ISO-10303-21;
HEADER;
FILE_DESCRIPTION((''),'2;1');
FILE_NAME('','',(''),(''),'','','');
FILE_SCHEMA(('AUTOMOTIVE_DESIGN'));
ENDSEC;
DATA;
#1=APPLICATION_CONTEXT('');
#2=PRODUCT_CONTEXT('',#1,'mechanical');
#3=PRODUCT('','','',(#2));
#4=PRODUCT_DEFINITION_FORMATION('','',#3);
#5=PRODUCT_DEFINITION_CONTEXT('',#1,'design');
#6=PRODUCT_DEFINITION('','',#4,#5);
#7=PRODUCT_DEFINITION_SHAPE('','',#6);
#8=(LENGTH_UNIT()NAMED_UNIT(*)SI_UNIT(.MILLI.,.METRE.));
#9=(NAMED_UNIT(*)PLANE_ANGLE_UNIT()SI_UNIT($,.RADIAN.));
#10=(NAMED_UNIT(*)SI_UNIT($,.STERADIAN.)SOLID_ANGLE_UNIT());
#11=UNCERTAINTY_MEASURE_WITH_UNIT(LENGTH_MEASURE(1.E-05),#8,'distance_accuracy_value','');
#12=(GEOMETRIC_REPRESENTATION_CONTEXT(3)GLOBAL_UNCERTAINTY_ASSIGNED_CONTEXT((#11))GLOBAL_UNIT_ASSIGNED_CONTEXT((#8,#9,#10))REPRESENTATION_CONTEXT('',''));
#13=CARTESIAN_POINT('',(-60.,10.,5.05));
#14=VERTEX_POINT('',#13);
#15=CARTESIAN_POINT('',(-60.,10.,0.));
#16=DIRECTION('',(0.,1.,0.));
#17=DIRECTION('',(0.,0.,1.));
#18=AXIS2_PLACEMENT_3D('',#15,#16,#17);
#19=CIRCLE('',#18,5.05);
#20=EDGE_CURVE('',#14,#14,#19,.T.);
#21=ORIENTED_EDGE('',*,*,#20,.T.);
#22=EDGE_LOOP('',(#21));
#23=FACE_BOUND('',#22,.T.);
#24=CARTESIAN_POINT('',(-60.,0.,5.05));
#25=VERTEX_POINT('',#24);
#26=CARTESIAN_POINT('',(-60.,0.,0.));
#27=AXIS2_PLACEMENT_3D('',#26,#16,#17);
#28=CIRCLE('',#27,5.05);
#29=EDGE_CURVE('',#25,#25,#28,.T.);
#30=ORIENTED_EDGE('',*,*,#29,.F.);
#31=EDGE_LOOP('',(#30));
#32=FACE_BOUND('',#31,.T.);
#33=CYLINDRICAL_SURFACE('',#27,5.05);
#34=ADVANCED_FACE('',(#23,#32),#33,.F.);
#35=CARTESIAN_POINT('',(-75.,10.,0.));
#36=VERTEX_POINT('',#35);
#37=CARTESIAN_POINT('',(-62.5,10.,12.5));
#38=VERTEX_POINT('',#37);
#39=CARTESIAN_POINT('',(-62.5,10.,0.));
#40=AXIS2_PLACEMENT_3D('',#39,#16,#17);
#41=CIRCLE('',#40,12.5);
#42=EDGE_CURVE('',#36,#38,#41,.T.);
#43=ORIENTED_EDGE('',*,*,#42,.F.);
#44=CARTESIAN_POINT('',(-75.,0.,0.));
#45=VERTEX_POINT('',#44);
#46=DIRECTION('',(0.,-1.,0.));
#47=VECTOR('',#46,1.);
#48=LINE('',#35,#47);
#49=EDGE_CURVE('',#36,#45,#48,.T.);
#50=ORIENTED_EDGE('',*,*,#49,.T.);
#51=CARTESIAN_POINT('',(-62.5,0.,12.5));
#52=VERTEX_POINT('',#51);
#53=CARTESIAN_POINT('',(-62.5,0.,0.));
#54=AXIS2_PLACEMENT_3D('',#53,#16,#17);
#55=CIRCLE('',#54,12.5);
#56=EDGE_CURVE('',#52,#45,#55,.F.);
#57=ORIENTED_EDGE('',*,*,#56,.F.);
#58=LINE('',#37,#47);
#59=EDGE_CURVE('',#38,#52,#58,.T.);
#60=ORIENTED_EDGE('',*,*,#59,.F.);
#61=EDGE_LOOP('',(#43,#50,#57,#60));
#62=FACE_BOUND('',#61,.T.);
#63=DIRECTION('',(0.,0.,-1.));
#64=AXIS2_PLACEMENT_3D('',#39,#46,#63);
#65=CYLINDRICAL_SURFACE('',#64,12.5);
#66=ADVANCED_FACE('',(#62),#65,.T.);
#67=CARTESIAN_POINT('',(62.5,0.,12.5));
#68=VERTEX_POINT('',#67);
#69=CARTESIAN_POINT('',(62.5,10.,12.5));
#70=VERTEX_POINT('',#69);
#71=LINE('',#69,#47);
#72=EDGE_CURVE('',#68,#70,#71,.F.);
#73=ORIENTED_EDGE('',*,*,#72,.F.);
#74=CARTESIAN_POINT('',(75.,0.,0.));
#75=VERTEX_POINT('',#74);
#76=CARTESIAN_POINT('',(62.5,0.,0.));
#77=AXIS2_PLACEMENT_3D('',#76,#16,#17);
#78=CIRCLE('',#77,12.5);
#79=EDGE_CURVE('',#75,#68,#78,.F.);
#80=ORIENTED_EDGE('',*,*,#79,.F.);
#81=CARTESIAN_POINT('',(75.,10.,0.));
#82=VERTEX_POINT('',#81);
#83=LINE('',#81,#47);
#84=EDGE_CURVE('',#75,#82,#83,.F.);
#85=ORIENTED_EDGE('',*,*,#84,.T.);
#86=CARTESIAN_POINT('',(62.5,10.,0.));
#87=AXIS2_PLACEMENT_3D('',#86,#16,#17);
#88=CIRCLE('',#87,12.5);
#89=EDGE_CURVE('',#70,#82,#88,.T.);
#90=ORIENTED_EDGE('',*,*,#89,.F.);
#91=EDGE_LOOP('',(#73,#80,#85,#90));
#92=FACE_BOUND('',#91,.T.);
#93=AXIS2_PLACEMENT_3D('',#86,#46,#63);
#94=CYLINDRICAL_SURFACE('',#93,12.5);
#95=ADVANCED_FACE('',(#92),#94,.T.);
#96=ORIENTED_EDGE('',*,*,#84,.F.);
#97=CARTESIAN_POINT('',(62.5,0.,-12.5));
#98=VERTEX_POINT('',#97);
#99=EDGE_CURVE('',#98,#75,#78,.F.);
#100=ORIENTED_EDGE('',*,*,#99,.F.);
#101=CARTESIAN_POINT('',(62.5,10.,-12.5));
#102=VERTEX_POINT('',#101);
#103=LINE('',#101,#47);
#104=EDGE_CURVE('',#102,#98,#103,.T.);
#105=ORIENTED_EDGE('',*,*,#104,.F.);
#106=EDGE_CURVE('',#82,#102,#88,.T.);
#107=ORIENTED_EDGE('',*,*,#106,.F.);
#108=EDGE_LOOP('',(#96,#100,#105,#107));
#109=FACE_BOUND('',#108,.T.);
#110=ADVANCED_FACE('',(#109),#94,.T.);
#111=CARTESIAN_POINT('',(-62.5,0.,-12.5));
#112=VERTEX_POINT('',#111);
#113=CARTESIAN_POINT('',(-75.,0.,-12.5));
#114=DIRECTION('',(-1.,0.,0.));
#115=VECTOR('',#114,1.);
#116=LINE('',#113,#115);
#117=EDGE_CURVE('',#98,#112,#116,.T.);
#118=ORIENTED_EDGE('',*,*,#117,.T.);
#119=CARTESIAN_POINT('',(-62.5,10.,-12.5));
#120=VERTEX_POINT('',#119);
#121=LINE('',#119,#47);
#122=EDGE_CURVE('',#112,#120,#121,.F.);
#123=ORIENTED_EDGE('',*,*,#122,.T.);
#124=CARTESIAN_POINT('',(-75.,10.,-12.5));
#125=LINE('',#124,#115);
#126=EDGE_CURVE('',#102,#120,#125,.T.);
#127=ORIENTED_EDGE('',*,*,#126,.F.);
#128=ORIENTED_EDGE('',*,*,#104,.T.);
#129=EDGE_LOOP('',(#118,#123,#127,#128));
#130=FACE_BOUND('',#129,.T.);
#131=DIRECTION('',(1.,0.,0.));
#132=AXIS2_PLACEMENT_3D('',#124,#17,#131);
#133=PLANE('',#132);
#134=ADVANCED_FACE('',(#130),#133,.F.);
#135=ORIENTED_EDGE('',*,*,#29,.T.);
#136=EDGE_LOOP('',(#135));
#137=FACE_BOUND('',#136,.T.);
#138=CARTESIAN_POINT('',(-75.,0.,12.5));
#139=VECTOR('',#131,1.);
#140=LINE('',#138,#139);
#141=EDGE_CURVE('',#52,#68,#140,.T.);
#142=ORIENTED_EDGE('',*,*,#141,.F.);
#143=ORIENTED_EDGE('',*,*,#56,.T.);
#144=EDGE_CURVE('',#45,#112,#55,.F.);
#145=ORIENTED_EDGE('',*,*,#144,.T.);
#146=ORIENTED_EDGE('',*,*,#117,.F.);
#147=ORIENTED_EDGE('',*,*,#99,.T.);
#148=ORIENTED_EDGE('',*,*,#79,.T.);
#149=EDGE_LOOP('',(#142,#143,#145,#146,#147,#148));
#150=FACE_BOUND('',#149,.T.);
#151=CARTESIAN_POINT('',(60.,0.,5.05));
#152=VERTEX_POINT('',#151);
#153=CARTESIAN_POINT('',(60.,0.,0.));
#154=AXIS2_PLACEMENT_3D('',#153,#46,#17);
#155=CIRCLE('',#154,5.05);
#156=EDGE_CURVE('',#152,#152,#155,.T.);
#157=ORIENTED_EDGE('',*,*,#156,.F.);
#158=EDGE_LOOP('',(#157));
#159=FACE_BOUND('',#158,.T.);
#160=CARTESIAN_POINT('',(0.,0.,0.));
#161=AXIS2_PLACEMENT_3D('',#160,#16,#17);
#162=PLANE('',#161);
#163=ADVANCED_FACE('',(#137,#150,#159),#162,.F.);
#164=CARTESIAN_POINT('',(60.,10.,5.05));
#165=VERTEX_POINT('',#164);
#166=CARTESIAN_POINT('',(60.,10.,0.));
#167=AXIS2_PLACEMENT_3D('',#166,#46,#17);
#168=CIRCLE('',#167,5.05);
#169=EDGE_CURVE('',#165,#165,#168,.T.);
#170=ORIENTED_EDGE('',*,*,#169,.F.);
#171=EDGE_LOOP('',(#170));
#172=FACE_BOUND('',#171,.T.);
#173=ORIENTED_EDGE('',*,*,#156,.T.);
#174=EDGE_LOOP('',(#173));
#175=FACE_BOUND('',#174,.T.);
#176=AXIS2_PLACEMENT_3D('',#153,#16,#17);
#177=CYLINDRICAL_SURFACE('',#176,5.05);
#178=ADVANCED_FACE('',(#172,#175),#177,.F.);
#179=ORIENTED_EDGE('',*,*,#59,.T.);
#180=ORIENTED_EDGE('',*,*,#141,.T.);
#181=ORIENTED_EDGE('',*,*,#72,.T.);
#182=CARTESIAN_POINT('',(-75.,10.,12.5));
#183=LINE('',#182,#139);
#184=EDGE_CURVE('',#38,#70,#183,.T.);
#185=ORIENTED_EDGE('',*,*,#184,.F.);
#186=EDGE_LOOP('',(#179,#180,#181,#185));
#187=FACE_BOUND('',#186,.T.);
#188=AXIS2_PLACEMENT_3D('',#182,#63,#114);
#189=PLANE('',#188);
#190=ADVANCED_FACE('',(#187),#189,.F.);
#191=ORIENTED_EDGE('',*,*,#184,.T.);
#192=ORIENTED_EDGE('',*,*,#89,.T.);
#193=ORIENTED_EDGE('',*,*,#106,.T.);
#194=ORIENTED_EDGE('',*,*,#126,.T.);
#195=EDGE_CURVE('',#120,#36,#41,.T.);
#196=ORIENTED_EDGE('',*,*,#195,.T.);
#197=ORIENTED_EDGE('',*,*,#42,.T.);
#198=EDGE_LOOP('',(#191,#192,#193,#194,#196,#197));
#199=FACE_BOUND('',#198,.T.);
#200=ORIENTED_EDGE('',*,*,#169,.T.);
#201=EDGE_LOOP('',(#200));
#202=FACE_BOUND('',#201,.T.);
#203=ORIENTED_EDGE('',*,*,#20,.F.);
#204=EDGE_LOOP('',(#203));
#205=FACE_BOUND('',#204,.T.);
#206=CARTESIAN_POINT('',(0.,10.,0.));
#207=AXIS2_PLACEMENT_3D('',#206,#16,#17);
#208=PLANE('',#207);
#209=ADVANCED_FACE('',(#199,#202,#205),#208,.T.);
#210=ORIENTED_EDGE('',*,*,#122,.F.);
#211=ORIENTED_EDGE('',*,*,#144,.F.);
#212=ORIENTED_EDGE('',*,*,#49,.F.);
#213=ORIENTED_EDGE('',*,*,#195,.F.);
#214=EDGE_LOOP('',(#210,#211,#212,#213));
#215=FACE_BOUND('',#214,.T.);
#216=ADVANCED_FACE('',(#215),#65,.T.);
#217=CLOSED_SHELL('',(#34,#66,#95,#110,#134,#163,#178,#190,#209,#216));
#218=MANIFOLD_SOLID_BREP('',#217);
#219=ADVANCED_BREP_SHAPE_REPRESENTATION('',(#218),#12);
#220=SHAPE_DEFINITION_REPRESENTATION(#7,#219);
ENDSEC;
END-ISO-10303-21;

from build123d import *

# Parameters (mm, degrees)
SKETCH_1_W          = 150
SKETCH_1_H          = 25
EXTRUDE_2_DEPTH     = 10
SKETCH_5_R          = 5.05
CUT_EXTRUDE_4_DEPTH = 77.689308251
FILLET_1_R          = 12.5


with BuildPart() as part:
    # Эскиз1 → Бобышка-Вытянуть2 (new body)
    with BuildSketch(Plane(origin=(0, 0, 0), x_dir=(1, 0, 0), z_dir=(0, 1, 0))):
        Rectangle(SKETCH_1_W, SKETCH_1_H)
    extrude(amount=EXTRUDE_2_DEPTH)

    # Эскиз5 → Вырез-Вытянуть4 (cut, through all)
    with BuildSketch(Plane(origin=(0, 10, 0), x_dir=(1, 0, 0), z_dir=(0, 1, 0))):
        with Locations(Location((-60, 0, 0), (0, 0, 270))):
            Circle(SKETCH_5_R)
    cut_extrude_4 = extrude(amount=-CUT_EXTRUDE_4_DEPTH, mode=Mode.SUBTRACT)

    # Зеркальное отражение1: Вырез-Вытянуть4 across plane
    add(cut_extrude_4.mirror(Plane(origin=(0, 0, 0), x_dir=(0, 0, 1), z_dir=(1, 0, 0))), mode=Mode.SUBTRACT)

    # Скругление1
    fillet_1_edges = [part.edges().sort_by_distance(p)[0] for p in [
        (-75, 5, 12.5),
        (-75, 5, -12.5),
        (75, 5, 12.5),
        (75, 5, -12.5),
    ]]
    fillet(fillet_1_edges, radius=FILLET_1_R - 0.0001)  # a hair under: the kernel refuses the full size


solid = part.part
